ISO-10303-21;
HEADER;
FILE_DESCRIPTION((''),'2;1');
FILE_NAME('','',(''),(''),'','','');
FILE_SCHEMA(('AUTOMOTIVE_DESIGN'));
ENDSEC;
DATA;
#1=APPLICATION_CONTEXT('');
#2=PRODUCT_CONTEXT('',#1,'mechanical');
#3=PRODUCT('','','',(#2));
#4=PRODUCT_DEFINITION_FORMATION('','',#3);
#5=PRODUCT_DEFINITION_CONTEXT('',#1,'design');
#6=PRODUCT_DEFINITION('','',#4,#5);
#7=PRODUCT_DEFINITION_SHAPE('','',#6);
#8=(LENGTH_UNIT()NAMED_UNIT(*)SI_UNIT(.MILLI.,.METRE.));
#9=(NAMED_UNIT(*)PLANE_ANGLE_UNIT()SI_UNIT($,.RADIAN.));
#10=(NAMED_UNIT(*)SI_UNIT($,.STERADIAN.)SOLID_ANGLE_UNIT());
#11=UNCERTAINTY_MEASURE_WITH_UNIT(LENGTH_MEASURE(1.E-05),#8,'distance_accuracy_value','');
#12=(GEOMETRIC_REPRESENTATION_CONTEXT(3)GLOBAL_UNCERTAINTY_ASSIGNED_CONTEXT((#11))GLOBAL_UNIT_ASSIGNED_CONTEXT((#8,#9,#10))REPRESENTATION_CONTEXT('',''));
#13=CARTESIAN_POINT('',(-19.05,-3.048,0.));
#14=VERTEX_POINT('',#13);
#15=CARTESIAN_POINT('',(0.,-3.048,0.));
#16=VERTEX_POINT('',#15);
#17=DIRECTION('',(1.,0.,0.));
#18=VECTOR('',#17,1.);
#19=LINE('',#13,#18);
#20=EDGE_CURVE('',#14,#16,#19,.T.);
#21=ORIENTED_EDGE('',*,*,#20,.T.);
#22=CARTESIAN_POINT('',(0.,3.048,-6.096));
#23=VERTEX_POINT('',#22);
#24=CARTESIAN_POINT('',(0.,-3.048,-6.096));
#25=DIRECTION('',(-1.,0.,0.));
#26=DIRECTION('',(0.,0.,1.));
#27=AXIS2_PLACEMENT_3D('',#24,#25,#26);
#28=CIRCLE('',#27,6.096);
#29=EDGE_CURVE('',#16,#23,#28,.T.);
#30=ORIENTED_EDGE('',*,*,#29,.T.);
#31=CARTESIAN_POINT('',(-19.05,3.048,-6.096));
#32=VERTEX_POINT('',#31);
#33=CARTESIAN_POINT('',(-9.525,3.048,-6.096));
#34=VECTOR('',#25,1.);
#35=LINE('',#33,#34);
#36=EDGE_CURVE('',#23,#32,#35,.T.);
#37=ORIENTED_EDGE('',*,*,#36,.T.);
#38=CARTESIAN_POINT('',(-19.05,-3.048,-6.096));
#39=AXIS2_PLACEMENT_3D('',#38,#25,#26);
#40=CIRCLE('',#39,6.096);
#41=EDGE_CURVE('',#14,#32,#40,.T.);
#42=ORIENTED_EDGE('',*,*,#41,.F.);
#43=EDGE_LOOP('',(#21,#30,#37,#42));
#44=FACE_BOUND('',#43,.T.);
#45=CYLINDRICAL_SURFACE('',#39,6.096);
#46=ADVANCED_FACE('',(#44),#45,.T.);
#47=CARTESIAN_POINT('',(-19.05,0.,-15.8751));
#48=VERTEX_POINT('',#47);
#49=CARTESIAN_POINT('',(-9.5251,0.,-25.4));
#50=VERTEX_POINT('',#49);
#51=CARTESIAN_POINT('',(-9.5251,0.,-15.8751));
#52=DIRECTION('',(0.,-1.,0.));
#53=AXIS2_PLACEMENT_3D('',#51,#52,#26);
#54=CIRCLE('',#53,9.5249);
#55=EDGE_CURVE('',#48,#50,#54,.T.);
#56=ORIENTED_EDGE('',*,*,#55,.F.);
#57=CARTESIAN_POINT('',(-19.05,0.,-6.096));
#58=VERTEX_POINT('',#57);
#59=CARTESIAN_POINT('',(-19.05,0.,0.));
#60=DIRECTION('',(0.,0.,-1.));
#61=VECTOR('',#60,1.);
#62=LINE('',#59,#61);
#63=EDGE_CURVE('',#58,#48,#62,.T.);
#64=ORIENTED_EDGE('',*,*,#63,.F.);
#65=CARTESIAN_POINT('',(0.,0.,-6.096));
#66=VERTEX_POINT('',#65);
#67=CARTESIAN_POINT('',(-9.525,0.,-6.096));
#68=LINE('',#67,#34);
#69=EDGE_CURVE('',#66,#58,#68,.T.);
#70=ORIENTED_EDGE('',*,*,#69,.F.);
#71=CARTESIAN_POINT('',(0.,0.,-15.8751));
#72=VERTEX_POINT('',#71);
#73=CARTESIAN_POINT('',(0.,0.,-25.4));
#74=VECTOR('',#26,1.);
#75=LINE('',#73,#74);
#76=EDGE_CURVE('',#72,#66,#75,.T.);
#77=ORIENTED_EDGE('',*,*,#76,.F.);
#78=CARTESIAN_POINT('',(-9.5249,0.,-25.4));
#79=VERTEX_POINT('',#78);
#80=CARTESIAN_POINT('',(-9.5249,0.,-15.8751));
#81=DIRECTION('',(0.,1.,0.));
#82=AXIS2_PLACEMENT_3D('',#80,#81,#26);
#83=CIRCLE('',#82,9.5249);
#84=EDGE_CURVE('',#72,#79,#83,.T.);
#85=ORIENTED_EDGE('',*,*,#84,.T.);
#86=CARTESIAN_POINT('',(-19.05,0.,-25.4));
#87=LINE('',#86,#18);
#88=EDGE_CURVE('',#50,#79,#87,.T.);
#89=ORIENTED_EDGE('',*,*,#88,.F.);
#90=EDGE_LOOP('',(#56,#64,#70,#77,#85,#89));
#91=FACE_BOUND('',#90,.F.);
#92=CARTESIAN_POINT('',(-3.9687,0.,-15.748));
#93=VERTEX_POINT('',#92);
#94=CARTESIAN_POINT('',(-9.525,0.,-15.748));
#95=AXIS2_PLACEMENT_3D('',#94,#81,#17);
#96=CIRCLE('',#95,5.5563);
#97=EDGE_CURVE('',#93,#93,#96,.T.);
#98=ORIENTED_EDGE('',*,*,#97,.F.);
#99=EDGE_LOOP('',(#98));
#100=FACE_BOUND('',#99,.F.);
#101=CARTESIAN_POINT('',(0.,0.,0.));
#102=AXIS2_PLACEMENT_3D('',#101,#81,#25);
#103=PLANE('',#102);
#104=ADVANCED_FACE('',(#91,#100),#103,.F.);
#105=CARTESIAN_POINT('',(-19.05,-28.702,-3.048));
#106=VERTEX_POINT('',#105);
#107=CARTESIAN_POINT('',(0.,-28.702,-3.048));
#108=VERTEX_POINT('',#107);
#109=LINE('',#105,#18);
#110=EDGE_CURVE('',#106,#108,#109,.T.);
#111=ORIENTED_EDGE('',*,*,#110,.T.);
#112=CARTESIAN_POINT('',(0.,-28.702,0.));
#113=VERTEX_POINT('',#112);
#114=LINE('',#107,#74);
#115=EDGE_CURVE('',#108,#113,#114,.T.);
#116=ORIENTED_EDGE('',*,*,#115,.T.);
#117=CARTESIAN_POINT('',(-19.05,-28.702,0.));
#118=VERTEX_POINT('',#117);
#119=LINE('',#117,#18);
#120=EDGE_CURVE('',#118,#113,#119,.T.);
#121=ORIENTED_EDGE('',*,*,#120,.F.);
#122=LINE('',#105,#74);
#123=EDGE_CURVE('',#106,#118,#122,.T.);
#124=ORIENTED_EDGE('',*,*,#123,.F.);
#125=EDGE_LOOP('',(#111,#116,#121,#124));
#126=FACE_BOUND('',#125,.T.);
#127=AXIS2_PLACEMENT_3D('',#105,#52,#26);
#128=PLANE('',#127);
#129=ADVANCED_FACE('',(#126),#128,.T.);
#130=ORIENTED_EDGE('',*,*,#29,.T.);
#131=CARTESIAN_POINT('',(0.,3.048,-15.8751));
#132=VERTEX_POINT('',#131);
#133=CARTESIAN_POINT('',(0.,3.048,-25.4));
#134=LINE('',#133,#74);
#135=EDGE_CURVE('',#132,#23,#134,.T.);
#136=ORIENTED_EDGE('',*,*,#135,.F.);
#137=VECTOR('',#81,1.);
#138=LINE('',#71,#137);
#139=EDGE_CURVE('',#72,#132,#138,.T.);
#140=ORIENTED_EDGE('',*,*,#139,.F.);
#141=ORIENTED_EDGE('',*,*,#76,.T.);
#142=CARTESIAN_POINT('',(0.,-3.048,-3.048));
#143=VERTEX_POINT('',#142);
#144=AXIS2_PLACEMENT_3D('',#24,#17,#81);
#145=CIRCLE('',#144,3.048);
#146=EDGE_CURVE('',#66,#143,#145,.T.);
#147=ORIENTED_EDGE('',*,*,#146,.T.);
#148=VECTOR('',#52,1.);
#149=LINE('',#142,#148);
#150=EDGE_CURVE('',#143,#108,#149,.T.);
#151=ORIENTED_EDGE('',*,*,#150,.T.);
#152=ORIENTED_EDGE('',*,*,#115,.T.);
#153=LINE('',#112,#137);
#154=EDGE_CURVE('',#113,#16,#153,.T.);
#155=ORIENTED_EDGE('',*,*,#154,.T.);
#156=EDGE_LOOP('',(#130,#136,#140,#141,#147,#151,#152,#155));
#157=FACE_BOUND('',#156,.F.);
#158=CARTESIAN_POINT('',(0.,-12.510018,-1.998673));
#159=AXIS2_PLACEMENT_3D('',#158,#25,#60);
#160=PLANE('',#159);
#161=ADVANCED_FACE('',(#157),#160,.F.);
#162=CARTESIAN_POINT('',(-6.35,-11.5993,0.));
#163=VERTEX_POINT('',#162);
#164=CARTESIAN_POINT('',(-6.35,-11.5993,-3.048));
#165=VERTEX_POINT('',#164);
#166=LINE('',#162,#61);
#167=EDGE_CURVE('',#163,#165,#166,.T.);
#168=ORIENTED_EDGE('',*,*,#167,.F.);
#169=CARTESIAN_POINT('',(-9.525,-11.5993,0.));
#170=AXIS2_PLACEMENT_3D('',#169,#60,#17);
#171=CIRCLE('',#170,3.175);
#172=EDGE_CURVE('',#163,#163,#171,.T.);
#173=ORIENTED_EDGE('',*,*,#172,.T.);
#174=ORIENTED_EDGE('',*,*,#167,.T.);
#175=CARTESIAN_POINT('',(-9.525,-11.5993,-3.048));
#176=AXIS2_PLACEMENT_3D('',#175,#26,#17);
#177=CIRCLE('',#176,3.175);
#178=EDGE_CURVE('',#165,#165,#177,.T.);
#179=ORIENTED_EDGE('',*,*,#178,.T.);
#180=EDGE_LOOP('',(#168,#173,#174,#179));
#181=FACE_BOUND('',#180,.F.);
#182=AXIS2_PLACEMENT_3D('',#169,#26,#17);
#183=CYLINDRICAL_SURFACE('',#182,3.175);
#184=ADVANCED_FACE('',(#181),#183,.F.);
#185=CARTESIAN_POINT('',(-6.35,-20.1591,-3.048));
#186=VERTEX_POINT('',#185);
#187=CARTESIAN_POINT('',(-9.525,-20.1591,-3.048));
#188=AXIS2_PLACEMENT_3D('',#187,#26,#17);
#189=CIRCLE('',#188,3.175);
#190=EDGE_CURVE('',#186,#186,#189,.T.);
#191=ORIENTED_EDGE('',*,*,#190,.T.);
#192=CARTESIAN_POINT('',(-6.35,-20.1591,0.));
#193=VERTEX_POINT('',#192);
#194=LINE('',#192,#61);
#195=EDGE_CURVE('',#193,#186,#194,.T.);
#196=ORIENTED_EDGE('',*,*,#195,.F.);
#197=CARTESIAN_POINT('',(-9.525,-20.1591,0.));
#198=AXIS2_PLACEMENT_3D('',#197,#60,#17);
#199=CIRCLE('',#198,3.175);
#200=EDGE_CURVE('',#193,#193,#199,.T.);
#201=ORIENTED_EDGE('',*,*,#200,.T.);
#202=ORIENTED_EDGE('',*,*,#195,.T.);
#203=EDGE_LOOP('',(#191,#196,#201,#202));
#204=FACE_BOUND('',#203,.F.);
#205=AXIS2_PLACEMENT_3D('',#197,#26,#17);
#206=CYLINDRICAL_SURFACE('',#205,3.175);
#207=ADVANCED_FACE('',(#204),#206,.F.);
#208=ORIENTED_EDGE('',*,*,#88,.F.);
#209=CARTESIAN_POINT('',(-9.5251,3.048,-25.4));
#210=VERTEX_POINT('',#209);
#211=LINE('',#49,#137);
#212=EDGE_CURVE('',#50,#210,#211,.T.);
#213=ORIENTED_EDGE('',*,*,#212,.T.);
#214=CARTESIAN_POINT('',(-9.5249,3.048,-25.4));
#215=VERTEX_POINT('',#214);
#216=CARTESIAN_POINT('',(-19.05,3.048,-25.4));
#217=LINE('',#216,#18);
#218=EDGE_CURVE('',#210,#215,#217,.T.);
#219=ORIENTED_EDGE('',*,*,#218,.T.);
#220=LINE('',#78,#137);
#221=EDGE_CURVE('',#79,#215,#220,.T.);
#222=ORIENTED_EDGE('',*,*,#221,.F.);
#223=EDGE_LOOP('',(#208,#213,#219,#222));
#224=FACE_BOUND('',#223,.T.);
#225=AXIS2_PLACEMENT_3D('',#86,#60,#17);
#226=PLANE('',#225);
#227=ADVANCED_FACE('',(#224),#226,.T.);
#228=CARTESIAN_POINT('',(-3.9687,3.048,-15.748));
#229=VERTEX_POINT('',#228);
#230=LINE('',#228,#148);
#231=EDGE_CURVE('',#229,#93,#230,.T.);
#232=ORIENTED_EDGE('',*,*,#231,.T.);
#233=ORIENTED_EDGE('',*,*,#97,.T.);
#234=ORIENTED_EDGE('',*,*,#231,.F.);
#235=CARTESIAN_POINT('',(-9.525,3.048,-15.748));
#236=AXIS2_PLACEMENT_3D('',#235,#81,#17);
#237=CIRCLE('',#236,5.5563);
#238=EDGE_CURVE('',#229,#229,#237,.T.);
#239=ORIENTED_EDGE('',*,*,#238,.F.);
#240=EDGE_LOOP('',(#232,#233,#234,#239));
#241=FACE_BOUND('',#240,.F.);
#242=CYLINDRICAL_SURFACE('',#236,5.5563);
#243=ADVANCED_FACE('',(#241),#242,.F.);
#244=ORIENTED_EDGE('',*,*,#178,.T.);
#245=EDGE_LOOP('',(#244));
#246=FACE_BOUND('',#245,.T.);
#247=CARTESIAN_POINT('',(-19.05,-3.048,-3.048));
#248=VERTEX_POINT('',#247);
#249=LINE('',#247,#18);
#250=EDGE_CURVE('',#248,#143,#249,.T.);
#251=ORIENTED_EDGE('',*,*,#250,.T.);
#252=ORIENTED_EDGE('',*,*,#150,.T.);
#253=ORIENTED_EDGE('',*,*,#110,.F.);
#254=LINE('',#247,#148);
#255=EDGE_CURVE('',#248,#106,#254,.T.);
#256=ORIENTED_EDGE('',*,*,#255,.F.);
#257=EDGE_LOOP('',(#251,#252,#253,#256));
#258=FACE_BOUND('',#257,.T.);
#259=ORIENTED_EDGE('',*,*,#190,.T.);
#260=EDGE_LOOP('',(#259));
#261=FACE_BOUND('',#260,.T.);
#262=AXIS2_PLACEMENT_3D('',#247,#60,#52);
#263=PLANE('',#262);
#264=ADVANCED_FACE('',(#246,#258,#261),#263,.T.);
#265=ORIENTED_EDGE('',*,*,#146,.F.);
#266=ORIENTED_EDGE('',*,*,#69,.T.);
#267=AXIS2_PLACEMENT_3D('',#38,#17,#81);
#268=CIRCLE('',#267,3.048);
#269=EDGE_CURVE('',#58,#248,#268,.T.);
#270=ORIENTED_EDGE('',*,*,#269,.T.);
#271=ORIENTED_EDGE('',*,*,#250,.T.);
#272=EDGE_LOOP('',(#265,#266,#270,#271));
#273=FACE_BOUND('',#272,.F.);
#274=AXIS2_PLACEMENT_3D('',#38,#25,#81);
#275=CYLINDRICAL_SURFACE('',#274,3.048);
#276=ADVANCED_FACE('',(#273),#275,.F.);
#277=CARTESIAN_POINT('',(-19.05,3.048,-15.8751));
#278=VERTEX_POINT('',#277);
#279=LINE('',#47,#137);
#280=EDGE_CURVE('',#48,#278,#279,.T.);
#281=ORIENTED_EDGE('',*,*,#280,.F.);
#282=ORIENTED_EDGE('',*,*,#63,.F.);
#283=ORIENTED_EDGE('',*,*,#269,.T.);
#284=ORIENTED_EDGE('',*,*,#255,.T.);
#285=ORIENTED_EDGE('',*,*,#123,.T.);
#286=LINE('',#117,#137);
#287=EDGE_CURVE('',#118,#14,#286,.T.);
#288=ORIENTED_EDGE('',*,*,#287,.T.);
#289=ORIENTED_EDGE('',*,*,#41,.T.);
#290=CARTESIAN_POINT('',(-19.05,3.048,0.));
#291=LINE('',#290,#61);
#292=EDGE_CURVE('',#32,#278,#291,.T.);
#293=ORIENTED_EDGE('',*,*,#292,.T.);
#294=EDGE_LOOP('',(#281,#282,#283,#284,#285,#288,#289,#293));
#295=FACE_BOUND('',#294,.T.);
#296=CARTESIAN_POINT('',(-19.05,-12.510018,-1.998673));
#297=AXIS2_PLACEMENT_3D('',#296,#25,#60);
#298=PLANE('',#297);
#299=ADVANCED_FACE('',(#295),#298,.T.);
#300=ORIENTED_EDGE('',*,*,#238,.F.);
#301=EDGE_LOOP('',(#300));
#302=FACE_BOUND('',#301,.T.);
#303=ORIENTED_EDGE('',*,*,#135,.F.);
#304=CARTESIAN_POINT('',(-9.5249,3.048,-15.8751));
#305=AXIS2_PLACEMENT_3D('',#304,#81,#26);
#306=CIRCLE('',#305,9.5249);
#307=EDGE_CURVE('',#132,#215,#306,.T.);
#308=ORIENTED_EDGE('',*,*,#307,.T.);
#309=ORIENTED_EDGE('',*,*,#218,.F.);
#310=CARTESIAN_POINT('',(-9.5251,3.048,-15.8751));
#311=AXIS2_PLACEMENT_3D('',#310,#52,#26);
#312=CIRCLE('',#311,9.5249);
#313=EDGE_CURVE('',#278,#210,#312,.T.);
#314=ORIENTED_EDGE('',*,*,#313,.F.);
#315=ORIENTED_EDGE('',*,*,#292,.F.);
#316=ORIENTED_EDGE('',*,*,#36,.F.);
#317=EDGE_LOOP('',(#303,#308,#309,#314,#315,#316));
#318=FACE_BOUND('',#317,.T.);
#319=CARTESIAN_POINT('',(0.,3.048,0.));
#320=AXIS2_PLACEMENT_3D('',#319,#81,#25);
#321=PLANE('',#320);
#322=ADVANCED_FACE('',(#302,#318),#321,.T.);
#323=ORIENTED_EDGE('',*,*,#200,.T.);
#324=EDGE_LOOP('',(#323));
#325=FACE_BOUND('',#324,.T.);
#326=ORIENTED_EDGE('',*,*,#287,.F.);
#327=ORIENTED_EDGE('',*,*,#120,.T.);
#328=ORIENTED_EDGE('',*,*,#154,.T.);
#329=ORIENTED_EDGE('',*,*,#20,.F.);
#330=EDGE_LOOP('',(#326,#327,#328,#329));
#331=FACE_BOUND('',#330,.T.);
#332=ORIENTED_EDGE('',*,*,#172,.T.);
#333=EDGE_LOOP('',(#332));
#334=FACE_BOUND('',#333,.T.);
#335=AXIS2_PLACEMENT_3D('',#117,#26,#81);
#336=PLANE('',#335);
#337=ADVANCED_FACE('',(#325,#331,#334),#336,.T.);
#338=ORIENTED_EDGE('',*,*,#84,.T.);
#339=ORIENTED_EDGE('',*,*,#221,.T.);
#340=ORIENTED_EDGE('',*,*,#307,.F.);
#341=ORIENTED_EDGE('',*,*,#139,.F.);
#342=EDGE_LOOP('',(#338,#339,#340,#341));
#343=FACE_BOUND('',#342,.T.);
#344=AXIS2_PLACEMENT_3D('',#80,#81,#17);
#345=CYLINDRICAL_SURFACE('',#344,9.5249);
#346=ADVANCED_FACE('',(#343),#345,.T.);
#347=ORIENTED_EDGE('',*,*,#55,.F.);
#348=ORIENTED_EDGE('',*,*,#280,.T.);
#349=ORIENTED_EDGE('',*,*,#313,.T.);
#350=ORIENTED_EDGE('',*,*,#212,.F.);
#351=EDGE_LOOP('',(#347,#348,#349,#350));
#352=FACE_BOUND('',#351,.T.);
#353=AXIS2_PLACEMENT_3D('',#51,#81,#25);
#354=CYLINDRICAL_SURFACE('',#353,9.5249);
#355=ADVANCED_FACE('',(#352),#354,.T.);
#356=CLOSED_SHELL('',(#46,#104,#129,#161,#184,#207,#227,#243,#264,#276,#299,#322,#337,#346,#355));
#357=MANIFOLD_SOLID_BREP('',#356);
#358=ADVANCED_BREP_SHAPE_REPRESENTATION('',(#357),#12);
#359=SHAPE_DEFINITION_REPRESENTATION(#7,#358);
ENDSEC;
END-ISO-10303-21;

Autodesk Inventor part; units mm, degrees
ref_plane "YZ Plane" through (0, 0, 0) normal (1, 0, 0) x (0, 1, 0)
ref_plane "XZ Plane" through (0, 0, 0) normal (0, 1, 0) x (-1, 0, 0)
ref_plane "XY Plane" through (0, 0, 0) normal (0, 0, 1) x (1, 0, 0)
sketch "Sketch1" plane through (0, 0, 0) normal (0, 1, 0) x (-1, 0, 0)
  line L0 (0, 0) -> (19.05, 0)
  line L1 (19.05, 0) -> (19.05, -25.4)
  line L2 (19.05, -25.4) -> (0, -25.4)
  line L3 (0, -25.4) -> (0, 0)
  dimension "d0" = 25.4
  dimension "d1" = 19.05
extrude "Plate1" add sketch "Sketch1" along normal blind 3.048
sketch "Sketch2" plane through (-19.05, 3.048, -3.048) normal (0, 0, 1) x (1, 0, 0)
  line L0 (19.05, 0) -> (0, 0)
  line L1 (0, 0) -> (0, -31.75)
  line L2 (0, -31.75) -> (19.05, -31.75)
  line L3 (19.05, -31.75) -> (19.05, 0)
edge flange "Flange1" height 31.75 angle 90 thickness 3.048 bend radius 3.048 thickness toward (0, 0, 1) relief tear relief width 3.048 relief depth 1.524 edges at (-9.525, 0, 0) wall of the first edge with corners at (0, 3.048, -3.048) (-19.05, 3.048, -3.048) (-19.05, -28.702, -3.048) (0, -28.702, -3.048)
bend "Bend1"
corner "Corner1"
sketch "Sketch3" plane through (0, 3.048, 0) normal (0, 1, 0) x (1, 0, 0)
  line L0 (-19.05, 6.096) -> (-19.05, 25.4) projected
  line L1 (-19.05, 25.4) -> (0, 25.4) projected
  circle A0 centre (-9.525, 15.748) radius 5.5563
  point P0 (0, 0)
  dimension "d13" = 11.1125
extrude "Cut1" cut sketch "Sketch3" against normal blind 3.048
fillet "Corner Round1" radius 9.525 2 edges at (0, 1.524, -25.4) (-19.05, 1.524, -25.4)
sketch "Sketch5" plane through (-19.05, -28.702, 0) normal (0, 0, 1) x (1, 0, 0)
  line L0 (0, 0) -> (0, 25.654) projected
  line L1 (19.05, 0) -> (0, 0) projected
  line L2 (19.05, 25.654) -> (19.05, 0) projected
  line L3 (19.05, 25.654) -> (0, 25.654) projected
  line L4 (0, 25.654) -> (19.05, 25.654) projected
  line L5 (9.525, 25.654) -> (9.525, 17.1027)
  line L6 (9.525, 17.1027) -> (9.525, 8.5429)
  circle A0 centre (9.525, 17.1027) radius 3.175
  circle A1 centre (9.525, 8.5429) radius 3.175
  point P0 (19.05, 28.702)
  dimension "d17" = 8.5513
  dimension "d18" = 8.5598
  dimension "d19" = 6.35
  dimension "d20" = 6.35
extrude "Cut2" cut sketch "Sketch5" against normal blind 3.048 contours A0 L6 L5 | L5 L6 A0 | A1
equation "\"d14\" = Thickness"
equation "\"d21\" = Thickness"
equation "\"d3\" = BendReliefWidth"
equation "\"d4\" = BendReliefDepth"
equation "\"d5\" = MinimumRemnant"
equation "\"d6\" = BendRadius"
equation "\"d9\" = BendRadius"
equation "\"d10\" = CornerReliefSize"
equation "\"d11\" = GapSize"
equation "\"d12\" = JacobiRadiusSize"
equation "\"BendRadius\" = Thickness"
equation "\"BendReliefWidth\" = Thickness"
equation "\"BendReliefDepth\" = 0.5 * Thickness"
equation "\"CornerReliefSize\" = 4 * Thickness"
equation "\"MinimumRemnant\" = 2 * Thickness"
equation "\"TransitionRadius\" = BendRadius"
equation "\"JacobiRadiusSize\" = BendRadius"
equation "\"GapSize\" = Thickness"
equation "\"d2\" = BendRadius"
equation "\"Thickness\" = 3.048"
properties part number "RSL plate"
